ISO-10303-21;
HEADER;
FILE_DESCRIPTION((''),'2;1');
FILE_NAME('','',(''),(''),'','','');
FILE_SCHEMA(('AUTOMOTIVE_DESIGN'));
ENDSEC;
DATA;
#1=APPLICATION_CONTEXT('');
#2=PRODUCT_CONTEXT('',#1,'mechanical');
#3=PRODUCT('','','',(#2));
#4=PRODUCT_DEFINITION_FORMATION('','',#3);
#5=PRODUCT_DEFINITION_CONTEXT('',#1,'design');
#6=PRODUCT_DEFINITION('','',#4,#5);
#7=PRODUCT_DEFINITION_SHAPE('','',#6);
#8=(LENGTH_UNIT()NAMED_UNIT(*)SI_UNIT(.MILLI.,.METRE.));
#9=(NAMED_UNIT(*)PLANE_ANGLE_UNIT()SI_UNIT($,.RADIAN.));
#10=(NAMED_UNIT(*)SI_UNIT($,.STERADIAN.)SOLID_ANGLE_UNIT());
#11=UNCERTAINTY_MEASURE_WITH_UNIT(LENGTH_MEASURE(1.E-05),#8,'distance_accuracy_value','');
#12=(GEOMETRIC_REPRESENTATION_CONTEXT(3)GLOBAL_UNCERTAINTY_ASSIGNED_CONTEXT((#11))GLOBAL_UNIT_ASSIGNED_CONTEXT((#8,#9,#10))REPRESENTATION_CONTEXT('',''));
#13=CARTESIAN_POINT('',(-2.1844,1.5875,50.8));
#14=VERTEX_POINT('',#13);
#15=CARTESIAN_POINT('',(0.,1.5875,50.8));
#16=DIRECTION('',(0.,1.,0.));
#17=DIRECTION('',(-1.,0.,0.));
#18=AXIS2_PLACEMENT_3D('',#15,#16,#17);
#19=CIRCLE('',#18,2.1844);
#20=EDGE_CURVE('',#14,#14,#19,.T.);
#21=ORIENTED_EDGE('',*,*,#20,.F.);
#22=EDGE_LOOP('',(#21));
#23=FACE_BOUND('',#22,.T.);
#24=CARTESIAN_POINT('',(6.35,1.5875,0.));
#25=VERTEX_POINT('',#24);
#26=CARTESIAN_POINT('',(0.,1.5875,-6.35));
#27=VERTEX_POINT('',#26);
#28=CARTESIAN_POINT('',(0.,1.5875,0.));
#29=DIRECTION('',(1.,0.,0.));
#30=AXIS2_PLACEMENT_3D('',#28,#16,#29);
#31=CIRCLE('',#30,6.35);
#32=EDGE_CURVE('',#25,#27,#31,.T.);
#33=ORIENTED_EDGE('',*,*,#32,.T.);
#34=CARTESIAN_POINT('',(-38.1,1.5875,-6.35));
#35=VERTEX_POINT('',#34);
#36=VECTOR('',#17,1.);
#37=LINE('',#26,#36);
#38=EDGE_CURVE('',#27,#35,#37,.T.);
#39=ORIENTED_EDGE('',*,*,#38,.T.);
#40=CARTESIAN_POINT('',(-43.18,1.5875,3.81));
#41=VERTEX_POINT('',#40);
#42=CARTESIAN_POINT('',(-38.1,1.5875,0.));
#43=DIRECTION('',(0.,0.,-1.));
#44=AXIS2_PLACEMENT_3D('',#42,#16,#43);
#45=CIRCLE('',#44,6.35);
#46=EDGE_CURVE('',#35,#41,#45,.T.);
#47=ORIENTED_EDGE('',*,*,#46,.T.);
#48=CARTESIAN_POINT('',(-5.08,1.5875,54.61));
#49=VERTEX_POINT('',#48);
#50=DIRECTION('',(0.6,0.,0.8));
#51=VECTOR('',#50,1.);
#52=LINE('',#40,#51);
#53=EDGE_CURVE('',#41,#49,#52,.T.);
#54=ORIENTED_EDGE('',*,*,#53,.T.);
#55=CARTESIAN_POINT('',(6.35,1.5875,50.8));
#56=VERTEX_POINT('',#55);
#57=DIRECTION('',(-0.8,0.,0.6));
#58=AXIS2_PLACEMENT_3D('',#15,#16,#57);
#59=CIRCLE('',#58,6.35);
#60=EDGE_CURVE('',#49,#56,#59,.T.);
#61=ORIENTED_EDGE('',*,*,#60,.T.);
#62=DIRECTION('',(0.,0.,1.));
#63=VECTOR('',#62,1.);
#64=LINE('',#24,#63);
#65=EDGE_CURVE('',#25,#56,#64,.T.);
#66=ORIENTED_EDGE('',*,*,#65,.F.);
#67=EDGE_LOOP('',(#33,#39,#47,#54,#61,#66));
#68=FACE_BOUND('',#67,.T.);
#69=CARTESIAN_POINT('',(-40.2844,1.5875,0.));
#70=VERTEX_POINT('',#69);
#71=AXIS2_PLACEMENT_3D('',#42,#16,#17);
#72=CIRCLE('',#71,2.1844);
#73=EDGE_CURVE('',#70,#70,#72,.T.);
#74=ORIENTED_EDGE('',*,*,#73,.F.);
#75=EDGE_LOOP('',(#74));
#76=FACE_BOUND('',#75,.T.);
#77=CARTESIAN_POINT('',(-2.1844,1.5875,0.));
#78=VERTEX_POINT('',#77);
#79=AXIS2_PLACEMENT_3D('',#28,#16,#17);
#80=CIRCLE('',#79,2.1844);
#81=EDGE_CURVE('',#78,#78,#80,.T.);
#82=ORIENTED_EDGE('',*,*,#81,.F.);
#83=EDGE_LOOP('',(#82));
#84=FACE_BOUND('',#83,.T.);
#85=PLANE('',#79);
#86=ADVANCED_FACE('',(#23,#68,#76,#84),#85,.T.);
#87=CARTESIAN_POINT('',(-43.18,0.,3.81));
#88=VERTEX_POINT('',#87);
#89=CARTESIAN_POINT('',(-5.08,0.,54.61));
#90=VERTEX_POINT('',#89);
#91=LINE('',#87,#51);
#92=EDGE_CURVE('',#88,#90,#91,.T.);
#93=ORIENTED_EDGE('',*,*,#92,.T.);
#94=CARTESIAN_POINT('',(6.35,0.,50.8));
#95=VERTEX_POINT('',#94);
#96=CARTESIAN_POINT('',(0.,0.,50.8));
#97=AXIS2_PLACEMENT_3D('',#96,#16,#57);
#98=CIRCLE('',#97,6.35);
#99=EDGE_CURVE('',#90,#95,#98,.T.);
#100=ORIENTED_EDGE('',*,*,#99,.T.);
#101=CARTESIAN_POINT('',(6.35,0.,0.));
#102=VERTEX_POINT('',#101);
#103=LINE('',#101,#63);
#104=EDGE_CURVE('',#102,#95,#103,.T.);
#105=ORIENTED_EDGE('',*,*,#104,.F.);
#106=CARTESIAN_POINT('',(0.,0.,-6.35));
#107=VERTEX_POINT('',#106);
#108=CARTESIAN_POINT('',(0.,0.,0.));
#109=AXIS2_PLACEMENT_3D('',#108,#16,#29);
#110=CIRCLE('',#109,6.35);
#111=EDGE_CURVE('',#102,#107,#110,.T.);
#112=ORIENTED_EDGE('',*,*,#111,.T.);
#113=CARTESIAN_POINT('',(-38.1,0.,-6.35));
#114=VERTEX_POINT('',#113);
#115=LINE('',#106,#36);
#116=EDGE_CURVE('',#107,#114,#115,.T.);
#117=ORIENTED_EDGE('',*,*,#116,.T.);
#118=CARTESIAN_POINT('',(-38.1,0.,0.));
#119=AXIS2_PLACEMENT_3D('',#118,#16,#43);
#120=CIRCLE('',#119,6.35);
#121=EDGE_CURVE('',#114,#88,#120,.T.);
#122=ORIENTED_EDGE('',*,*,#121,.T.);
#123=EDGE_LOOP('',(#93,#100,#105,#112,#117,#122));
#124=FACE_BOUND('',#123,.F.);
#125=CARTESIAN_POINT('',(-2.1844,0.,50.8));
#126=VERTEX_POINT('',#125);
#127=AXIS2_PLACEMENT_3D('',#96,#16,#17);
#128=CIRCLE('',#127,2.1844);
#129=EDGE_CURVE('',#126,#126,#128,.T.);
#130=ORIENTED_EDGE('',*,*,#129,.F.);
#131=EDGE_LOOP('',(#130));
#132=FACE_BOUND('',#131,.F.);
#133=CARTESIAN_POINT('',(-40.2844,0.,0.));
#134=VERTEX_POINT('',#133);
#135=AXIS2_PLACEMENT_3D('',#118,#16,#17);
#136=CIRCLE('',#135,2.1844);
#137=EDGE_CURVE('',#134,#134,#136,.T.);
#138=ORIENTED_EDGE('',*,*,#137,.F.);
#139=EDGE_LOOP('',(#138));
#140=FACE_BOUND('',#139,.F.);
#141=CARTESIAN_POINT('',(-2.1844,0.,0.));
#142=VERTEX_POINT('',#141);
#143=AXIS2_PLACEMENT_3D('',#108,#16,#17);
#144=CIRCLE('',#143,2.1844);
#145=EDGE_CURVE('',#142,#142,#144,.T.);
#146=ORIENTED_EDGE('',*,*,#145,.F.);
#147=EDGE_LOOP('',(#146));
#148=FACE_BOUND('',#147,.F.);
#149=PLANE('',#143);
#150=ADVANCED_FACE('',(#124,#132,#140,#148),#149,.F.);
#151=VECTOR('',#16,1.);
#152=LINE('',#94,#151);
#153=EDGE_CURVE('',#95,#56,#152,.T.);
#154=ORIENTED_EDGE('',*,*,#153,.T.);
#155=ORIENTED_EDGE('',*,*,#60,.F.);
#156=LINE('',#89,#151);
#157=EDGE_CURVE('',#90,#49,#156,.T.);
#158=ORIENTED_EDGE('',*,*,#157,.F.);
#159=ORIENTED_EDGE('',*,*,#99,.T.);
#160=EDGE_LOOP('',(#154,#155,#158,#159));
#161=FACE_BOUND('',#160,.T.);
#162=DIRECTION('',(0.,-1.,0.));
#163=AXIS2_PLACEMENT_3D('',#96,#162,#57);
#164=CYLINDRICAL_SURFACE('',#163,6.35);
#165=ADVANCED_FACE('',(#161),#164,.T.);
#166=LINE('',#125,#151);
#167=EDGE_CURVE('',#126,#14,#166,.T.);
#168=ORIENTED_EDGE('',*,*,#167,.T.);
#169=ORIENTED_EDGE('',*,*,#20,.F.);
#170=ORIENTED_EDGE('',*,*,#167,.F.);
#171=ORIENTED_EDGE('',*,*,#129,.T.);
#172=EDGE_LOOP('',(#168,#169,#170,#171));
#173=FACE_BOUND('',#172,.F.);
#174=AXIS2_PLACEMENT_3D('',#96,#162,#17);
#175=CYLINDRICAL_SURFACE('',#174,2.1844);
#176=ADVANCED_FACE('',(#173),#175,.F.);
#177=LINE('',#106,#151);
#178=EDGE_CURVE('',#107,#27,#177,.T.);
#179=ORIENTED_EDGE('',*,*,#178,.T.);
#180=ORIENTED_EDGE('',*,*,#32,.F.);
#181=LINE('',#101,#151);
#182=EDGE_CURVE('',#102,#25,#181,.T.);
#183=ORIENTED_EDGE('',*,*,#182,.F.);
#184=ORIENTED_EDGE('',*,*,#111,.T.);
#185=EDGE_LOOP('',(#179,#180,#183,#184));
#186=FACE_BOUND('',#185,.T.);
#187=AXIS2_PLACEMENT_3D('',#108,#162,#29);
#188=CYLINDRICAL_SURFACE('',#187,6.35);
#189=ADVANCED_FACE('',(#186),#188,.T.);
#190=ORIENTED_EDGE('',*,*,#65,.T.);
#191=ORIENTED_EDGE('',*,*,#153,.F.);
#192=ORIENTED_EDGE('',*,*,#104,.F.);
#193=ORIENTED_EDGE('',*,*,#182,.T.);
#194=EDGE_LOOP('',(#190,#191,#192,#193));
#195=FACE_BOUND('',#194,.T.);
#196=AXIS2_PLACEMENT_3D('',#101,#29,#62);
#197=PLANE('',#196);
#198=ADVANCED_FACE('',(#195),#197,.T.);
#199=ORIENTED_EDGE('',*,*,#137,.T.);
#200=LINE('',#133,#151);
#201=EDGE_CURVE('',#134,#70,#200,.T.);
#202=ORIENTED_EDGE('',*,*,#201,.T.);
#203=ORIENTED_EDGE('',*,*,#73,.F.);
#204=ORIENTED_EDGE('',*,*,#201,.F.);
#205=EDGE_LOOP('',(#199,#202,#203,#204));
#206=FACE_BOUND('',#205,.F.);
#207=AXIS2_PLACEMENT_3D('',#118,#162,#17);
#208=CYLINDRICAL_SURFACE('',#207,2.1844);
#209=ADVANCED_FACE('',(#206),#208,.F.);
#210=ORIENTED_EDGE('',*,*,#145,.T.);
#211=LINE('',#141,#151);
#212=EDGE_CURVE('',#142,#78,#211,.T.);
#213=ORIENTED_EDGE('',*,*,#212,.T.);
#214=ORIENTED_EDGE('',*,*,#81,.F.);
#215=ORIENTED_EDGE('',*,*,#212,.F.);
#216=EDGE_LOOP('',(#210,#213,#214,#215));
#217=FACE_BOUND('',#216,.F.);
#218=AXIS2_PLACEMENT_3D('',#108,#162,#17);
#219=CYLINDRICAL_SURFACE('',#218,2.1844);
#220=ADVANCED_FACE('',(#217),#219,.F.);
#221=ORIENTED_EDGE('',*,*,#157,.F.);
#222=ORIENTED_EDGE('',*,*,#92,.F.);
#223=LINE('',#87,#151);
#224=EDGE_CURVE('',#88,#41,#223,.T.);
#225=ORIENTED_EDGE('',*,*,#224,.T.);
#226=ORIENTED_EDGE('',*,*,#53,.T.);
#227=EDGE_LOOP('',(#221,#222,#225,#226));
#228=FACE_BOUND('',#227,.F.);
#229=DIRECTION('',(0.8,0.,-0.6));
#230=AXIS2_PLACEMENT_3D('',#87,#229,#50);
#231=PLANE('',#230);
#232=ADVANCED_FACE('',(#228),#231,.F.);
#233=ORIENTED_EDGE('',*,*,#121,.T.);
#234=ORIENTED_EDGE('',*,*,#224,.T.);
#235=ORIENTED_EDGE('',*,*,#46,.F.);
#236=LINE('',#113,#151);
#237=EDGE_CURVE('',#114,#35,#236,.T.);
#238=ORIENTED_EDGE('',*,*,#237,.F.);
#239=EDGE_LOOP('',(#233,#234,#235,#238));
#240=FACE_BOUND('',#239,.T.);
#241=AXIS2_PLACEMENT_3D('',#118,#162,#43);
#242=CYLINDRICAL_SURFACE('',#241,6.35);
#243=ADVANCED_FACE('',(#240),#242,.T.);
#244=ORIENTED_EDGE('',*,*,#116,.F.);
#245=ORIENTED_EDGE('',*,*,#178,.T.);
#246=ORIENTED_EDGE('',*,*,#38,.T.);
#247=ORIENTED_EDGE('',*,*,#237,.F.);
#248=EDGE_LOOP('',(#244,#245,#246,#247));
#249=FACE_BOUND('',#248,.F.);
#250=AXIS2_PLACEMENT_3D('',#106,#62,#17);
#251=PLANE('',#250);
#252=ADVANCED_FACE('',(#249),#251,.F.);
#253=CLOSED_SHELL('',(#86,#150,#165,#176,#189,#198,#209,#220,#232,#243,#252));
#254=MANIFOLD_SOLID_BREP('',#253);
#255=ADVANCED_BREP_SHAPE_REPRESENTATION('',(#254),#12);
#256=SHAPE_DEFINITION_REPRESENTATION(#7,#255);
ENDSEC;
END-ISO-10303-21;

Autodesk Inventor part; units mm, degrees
ref_plane "YZ Plane" through (0, 0, 0) normal (1, 0, 0) x (0, 1, 0)
ref_plane "XZ Plane" through (0, 0, 0) normal (0, 1, 0) x (-1, 0, 0)
ref_plane "XY Plane" through (0, 0, 0) normal (0, 0, 1) x (1, 0, 0)
sketch "main" plane through (0, 0, 0) normal (0, 0, 1) x (1, 0, 0)
  circle A0 centre (-17.594, -20.0255) radius 2.1844
  circle A1 centre (20.506, -20.0255) radius 2.1844
  circle A2 centre (-17.594, 30.7745) radius 2.1844
  arc A3 (-23.944, -20.0255) -> (-17.594, -26.3755) centre (-17.594, -20.0255) ccw
  arc A4 (20.506, -26.3755) -> (25.586, -16.2155) centre (20.506, -20.0255) ccw
  arc A5 (-12.514, 34.5845) -> (-23.944, 30.7745) centre (-17.594, 30.7745) ccw
  line L0 (-17.594, -26.3755) -> (20.506, -26.3755)
  line L1 (-23.944, -20.0255) -> (-23.944, 30.7745)
  line L2 (25.586, -16.2155) -> (-12.514, 34.5845)
  point P0 (-7.053, -5.2935)
  dimension "d0" = 12.7
  dimension "d1" = 12.7
  dimension "d2" = 12.7
sketch "Sketch1" plane through (0, 0, 0) normal (0, 1, 0) x (-1, 0, 0)
  circle A0 centre (0, 0) radius 2.1844
  circle A1 centre (38.1, 0) radius 2.1844
  circle A2 centre (0, 50.8) radius 2.1844
  arc A3 (-6.35, 0) -> (0, -6.35) centre (0, 0) ccw
  arc A4 (38.1, -6.35) -> (43.18, 3.81) centre (38.1, 0) ccw
  arc A5 (5.08, 54.61) -> (-6.35, 50.8) centre (0, 50.8) ccw
  line L0 (0, -6.35) -> (38.1, -6.35)
  line L1 (-6.35, 0) -> (-6.35, 50.8)
  line L2 (43.18, 3.81) -> (5.08, 54.61)
extrude "Extrusion1" add sketch "Sketch1" along normal blind 1.5875
equation "\"BendRadius\" = Thickness"
equation "\"BendReliefWidth\" = Thickness"
equation "\"BendReliefDepth\" = 0.5 * Thickness"
equation "\"CornerReliefSize\" = 4 * Thickness"
equation "\"MinimumRemnant\" = 2 * Thickness"
equation "\"TransitionRadius\" = BendRadius"
equation "\"JacobiRadiusSize\" = BendRadius"
equation "\"GapSize\" = Thickness"
equation "\"Thickness\" = 1.5875"
properties part number "intake_gusset" material "Acetal Resin, White"
